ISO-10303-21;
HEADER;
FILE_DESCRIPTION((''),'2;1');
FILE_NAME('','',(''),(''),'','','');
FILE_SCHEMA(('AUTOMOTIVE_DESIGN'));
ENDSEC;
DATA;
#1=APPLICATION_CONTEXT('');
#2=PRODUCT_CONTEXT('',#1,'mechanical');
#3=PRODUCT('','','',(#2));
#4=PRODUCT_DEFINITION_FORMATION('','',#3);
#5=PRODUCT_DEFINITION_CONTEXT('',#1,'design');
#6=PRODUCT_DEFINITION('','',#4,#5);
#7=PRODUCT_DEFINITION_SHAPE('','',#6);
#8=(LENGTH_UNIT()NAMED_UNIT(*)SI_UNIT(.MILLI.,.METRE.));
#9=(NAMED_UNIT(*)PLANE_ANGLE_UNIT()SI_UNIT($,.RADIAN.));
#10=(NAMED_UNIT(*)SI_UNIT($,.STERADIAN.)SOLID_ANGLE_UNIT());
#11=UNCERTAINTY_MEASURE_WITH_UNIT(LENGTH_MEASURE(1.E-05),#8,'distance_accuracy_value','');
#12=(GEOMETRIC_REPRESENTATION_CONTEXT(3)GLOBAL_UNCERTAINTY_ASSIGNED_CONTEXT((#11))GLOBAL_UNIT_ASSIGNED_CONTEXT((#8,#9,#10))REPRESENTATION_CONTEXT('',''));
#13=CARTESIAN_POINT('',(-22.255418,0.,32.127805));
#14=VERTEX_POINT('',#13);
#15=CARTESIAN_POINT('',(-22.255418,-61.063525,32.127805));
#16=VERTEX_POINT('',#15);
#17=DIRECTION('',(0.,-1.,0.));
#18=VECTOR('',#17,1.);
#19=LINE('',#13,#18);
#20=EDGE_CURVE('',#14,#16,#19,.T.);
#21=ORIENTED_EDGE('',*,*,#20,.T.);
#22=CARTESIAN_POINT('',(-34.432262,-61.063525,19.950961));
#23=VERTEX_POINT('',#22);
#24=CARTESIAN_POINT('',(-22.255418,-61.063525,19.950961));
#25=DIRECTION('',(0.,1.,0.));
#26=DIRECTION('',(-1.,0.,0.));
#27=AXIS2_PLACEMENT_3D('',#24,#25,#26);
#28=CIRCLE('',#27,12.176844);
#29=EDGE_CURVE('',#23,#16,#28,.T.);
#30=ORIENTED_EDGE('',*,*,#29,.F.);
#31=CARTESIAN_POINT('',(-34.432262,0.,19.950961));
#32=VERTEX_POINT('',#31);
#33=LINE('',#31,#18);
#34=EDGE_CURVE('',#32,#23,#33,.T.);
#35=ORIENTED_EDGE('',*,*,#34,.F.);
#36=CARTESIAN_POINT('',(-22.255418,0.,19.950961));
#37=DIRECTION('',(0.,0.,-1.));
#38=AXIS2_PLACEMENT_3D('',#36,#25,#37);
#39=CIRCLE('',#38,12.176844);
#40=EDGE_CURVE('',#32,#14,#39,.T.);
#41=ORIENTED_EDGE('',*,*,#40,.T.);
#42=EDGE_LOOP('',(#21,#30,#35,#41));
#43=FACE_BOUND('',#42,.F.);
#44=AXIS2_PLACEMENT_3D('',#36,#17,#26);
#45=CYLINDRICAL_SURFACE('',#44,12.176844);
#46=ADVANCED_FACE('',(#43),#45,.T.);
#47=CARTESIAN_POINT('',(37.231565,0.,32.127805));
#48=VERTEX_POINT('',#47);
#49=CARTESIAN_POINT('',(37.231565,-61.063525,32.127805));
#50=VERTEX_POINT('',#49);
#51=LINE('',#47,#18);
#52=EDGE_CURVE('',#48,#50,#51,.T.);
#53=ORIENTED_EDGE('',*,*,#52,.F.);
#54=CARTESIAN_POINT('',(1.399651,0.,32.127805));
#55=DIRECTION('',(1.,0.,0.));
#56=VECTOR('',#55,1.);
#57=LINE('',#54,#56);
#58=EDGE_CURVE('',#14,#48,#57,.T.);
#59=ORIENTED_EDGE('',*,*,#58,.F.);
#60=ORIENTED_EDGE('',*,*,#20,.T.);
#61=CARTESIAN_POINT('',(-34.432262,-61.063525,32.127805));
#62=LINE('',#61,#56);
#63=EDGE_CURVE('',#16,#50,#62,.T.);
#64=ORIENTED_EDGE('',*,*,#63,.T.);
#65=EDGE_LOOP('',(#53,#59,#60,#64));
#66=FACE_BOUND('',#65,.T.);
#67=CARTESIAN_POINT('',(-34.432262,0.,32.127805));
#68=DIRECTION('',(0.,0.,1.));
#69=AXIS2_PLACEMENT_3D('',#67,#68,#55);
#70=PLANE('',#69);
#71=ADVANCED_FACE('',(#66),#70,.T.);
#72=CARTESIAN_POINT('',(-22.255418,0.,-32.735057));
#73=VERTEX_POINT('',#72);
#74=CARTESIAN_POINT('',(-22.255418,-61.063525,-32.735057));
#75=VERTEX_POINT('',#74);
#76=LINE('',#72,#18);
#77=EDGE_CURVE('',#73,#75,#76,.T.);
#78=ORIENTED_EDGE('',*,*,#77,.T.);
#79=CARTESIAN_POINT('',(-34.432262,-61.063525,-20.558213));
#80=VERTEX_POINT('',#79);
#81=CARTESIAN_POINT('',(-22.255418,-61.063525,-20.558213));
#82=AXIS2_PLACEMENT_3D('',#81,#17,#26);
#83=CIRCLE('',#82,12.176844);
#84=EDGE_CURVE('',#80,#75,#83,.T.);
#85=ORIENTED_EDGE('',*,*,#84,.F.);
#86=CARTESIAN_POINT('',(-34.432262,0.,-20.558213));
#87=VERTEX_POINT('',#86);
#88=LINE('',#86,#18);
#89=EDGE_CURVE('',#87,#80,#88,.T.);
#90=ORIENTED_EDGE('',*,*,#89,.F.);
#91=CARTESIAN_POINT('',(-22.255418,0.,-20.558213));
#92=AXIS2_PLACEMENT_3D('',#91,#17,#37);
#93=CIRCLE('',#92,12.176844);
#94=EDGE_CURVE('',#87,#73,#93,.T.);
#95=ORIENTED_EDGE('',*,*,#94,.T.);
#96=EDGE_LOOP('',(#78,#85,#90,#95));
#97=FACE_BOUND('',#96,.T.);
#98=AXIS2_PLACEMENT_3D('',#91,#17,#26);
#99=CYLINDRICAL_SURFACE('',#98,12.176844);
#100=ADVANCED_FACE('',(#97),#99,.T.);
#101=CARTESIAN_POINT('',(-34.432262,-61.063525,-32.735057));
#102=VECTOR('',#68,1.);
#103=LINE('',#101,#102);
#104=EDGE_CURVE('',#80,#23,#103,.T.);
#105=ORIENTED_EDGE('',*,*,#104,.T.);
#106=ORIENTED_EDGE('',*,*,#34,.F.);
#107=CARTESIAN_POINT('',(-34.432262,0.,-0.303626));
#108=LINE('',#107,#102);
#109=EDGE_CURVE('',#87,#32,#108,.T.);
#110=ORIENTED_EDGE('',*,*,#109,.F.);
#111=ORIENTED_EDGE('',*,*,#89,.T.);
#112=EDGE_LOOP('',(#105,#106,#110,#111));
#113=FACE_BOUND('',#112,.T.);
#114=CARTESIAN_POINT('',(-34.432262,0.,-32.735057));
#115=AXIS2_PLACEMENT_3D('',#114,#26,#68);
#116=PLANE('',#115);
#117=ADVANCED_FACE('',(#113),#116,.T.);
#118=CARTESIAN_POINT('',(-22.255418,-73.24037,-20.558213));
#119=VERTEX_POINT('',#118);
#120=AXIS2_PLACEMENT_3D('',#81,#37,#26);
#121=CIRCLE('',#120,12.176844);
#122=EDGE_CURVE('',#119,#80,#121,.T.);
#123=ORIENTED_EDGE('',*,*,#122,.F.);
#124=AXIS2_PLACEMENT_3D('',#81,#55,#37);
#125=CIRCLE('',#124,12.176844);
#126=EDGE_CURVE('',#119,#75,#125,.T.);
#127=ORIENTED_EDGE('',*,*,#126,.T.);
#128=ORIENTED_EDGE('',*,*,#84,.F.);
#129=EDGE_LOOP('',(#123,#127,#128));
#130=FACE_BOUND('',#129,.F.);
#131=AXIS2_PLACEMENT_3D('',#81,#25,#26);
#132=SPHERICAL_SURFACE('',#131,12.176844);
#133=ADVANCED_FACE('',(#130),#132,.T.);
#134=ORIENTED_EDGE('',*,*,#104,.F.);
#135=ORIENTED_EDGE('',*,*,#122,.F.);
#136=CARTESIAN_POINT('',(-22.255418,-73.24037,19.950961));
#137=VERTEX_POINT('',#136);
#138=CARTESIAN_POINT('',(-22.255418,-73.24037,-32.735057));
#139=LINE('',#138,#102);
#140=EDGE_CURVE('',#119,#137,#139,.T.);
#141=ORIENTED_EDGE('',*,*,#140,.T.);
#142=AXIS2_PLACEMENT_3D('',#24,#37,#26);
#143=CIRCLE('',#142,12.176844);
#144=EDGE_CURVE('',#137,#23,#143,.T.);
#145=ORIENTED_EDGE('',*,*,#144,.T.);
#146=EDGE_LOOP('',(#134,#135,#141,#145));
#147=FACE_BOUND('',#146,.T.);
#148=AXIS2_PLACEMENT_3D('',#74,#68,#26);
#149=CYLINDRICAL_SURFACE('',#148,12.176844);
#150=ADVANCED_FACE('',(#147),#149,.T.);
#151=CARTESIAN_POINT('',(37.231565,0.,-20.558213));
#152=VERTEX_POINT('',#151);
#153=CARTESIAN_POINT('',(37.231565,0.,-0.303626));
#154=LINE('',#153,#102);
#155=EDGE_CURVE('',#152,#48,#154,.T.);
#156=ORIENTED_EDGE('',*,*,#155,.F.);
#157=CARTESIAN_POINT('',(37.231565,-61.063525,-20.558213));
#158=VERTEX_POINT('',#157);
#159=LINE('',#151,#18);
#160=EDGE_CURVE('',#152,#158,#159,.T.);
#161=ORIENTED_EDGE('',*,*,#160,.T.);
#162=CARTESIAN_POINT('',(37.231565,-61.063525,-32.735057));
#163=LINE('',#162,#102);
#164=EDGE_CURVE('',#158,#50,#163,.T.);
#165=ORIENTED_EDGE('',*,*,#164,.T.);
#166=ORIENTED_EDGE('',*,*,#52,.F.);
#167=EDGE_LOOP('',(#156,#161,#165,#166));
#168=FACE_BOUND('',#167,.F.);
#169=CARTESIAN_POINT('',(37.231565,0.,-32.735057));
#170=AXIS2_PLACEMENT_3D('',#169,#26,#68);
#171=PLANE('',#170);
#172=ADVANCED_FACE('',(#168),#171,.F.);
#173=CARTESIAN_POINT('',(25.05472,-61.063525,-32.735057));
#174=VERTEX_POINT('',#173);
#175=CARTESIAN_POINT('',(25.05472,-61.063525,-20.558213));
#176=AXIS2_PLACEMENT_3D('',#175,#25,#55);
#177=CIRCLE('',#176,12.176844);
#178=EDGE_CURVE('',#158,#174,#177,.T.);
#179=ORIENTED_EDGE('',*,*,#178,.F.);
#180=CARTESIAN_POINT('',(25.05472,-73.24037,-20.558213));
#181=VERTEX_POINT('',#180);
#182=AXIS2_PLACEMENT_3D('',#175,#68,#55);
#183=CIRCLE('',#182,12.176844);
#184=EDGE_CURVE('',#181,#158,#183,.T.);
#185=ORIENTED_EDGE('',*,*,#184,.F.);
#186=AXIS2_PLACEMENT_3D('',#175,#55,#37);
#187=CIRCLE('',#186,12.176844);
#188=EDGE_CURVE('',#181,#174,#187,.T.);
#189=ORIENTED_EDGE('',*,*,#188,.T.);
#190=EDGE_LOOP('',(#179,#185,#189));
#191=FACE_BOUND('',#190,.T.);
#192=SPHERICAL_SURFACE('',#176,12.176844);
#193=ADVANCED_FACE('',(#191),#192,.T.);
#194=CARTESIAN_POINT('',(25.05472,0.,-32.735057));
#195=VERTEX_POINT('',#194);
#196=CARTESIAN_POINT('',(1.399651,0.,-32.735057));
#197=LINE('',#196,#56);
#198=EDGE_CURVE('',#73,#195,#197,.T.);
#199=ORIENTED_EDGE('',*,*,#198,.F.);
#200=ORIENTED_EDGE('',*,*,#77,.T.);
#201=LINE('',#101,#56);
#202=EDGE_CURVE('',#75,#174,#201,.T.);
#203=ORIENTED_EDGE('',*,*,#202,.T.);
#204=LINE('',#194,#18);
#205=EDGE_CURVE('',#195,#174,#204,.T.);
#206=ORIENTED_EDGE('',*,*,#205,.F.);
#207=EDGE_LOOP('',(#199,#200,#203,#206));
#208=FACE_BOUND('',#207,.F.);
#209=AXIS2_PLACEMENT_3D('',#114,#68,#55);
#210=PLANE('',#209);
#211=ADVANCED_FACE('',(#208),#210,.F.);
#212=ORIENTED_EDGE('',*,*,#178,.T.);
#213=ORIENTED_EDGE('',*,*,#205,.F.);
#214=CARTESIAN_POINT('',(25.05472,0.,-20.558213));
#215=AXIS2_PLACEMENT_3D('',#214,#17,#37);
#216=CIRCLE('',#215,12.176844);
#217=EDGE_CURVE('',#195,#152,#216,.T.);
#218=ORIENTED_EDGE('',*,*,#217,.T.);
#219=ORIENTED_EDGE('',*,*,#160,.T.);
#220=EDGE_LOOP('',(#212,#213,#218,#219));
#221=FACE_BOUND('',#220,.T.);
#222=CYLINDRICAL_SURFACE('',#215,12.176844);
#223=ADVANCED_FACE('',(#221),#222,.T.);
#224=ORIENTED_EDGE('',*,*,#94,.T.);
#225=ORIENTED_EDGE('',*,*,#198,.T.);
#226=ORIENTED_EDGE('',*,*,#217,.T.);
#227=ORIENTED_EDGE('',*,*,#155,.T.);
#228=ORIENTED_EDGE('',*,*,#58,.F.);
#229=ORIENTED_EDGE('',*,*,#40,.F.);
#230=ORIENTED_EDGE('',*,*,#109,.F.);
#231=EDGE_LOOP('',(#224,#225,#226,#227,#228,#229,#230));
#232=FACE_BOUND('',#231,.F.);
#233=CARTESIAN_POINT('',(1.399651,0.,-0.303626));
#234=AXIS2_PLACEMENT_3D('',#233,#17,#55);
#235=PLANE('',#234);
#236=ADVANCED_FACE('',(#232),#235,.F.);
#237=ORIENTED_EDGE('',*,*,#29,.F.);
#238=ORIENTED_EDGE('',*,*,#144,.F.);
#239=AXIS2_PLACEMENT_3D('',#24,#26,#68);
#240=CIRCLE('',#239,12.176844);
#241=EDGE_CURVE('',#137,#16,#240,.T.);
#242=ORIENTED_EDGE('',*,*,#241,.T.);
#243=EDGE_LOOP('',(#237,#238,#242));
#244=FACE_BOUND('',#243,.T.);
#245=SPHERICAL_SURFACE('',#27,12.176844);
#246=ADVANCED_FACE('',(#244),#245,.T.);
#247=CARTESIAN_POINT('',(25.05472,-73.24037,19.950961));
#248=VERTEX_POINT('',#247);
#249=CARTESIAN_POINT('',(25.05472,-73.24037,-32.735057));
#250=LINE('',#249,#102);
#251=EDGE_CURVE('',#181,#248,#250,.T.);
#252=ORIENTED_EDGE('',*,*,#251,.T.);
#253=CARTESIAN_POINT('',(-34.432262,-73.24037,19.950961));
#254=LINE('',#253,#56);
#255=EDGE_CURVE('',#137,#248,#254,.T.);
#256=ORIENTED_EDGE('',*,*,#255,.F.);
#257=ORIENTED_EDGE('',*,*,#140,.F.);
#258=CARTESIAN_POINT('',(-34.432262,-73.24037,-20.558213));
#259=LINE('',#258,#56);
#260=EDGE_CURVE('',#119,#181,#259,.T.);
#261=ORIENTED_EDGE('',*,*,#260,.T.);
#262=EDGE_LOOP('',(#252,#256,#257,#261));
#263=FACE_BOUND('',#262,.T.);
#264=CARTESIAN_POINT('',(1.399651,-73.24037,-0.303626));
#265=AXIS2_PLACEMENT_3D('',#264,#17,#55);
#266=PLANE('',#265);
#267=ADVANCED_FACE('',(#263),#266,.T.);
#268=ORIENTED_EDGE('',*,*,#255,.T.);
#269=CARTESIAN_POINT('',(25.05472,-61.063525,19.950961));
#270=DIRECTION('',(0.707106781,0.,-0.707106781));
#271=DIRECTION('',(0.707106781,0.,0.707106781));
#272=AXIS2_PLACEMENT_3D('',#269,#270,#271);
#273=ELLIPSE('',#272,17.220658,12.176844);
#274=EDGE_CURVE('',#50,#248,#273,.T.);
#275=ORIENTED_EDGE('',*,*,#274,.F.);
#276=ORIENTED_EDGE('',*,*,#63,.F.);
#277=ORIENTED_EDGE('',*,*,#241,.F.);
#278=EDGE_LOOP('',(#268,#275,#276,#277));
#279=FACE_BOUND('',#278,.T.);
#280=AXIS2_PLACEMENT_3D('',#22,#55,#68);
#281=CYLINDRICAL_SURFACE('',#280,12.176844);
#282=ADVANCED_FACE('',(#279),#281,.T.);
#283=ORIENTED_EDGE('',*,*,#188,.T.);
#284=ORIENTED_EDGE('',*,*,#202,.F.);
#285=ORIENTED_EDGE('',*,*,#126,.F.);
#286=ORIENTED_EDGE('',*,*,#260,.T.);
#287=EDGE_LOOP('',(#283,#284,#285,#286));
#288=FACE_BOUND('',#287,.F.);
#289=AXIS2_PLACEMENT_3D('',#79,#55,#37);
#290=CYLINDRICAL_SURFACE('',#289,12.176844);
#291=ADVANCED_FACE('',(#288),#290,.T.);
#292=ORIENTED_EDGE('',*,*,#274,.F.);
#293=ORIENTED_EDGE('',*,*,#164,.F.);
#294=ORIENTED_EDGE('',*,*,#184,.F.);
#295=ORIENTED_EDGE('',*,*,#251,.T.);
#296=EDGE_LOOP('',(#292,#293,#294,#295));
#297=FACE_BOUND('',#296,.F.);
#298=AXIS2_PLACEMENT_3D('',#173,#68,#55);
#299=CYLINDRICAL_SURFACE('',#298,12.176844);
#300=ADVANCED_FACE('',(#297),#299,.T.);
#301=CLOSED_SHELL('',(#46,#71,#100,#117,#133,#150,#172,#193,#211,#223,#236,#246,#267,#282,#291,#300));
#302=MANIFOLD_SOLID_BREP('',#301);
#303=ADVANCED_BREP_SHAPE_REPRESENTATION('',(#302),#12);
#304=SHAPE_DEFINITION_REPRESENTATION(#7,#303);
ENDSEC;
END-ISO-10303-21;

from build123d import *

# Parameters (mm, degrees)
F1_W     = 71.663826704
F1_H     = 64.8628622293
F2_DEPTH = 73.2403695583
F5_R     = 12.1768440653


# Not quite as in the source:
# - the program builds the solid bodies; features that only make, move or delete a surface that nothing else refers to are left out


with BuildPart() as f2:
    # F1 (on face) → F2 (new body)
    with BuildSketch(Plane.XZ):
        with Locations((1.3996511698, -0.3036260605)):
            Rectangle(F1_W, F1_H)
    extrude(amount=F2_DEPTH)

    # F5
    f5_edges = [f2.edges().sort_by_distance(p)[0] for p in [
        (-34.432262, -36.620185, -32.735057),
        (37.231565, -36.620185, -32.735057),
        (-34.432262, -36.620185, 32.127805),
        (-34.432262, -73.24037, -0.303626),
        (1.399651, -73.24037, 32.127805),
        (37.231565, -73.24037, -0.303626),
        (1.399651, -73.24037, -32.735057),
    ]]
    fillet(f5_edges, radius=F5_R)


solid = f2.part
